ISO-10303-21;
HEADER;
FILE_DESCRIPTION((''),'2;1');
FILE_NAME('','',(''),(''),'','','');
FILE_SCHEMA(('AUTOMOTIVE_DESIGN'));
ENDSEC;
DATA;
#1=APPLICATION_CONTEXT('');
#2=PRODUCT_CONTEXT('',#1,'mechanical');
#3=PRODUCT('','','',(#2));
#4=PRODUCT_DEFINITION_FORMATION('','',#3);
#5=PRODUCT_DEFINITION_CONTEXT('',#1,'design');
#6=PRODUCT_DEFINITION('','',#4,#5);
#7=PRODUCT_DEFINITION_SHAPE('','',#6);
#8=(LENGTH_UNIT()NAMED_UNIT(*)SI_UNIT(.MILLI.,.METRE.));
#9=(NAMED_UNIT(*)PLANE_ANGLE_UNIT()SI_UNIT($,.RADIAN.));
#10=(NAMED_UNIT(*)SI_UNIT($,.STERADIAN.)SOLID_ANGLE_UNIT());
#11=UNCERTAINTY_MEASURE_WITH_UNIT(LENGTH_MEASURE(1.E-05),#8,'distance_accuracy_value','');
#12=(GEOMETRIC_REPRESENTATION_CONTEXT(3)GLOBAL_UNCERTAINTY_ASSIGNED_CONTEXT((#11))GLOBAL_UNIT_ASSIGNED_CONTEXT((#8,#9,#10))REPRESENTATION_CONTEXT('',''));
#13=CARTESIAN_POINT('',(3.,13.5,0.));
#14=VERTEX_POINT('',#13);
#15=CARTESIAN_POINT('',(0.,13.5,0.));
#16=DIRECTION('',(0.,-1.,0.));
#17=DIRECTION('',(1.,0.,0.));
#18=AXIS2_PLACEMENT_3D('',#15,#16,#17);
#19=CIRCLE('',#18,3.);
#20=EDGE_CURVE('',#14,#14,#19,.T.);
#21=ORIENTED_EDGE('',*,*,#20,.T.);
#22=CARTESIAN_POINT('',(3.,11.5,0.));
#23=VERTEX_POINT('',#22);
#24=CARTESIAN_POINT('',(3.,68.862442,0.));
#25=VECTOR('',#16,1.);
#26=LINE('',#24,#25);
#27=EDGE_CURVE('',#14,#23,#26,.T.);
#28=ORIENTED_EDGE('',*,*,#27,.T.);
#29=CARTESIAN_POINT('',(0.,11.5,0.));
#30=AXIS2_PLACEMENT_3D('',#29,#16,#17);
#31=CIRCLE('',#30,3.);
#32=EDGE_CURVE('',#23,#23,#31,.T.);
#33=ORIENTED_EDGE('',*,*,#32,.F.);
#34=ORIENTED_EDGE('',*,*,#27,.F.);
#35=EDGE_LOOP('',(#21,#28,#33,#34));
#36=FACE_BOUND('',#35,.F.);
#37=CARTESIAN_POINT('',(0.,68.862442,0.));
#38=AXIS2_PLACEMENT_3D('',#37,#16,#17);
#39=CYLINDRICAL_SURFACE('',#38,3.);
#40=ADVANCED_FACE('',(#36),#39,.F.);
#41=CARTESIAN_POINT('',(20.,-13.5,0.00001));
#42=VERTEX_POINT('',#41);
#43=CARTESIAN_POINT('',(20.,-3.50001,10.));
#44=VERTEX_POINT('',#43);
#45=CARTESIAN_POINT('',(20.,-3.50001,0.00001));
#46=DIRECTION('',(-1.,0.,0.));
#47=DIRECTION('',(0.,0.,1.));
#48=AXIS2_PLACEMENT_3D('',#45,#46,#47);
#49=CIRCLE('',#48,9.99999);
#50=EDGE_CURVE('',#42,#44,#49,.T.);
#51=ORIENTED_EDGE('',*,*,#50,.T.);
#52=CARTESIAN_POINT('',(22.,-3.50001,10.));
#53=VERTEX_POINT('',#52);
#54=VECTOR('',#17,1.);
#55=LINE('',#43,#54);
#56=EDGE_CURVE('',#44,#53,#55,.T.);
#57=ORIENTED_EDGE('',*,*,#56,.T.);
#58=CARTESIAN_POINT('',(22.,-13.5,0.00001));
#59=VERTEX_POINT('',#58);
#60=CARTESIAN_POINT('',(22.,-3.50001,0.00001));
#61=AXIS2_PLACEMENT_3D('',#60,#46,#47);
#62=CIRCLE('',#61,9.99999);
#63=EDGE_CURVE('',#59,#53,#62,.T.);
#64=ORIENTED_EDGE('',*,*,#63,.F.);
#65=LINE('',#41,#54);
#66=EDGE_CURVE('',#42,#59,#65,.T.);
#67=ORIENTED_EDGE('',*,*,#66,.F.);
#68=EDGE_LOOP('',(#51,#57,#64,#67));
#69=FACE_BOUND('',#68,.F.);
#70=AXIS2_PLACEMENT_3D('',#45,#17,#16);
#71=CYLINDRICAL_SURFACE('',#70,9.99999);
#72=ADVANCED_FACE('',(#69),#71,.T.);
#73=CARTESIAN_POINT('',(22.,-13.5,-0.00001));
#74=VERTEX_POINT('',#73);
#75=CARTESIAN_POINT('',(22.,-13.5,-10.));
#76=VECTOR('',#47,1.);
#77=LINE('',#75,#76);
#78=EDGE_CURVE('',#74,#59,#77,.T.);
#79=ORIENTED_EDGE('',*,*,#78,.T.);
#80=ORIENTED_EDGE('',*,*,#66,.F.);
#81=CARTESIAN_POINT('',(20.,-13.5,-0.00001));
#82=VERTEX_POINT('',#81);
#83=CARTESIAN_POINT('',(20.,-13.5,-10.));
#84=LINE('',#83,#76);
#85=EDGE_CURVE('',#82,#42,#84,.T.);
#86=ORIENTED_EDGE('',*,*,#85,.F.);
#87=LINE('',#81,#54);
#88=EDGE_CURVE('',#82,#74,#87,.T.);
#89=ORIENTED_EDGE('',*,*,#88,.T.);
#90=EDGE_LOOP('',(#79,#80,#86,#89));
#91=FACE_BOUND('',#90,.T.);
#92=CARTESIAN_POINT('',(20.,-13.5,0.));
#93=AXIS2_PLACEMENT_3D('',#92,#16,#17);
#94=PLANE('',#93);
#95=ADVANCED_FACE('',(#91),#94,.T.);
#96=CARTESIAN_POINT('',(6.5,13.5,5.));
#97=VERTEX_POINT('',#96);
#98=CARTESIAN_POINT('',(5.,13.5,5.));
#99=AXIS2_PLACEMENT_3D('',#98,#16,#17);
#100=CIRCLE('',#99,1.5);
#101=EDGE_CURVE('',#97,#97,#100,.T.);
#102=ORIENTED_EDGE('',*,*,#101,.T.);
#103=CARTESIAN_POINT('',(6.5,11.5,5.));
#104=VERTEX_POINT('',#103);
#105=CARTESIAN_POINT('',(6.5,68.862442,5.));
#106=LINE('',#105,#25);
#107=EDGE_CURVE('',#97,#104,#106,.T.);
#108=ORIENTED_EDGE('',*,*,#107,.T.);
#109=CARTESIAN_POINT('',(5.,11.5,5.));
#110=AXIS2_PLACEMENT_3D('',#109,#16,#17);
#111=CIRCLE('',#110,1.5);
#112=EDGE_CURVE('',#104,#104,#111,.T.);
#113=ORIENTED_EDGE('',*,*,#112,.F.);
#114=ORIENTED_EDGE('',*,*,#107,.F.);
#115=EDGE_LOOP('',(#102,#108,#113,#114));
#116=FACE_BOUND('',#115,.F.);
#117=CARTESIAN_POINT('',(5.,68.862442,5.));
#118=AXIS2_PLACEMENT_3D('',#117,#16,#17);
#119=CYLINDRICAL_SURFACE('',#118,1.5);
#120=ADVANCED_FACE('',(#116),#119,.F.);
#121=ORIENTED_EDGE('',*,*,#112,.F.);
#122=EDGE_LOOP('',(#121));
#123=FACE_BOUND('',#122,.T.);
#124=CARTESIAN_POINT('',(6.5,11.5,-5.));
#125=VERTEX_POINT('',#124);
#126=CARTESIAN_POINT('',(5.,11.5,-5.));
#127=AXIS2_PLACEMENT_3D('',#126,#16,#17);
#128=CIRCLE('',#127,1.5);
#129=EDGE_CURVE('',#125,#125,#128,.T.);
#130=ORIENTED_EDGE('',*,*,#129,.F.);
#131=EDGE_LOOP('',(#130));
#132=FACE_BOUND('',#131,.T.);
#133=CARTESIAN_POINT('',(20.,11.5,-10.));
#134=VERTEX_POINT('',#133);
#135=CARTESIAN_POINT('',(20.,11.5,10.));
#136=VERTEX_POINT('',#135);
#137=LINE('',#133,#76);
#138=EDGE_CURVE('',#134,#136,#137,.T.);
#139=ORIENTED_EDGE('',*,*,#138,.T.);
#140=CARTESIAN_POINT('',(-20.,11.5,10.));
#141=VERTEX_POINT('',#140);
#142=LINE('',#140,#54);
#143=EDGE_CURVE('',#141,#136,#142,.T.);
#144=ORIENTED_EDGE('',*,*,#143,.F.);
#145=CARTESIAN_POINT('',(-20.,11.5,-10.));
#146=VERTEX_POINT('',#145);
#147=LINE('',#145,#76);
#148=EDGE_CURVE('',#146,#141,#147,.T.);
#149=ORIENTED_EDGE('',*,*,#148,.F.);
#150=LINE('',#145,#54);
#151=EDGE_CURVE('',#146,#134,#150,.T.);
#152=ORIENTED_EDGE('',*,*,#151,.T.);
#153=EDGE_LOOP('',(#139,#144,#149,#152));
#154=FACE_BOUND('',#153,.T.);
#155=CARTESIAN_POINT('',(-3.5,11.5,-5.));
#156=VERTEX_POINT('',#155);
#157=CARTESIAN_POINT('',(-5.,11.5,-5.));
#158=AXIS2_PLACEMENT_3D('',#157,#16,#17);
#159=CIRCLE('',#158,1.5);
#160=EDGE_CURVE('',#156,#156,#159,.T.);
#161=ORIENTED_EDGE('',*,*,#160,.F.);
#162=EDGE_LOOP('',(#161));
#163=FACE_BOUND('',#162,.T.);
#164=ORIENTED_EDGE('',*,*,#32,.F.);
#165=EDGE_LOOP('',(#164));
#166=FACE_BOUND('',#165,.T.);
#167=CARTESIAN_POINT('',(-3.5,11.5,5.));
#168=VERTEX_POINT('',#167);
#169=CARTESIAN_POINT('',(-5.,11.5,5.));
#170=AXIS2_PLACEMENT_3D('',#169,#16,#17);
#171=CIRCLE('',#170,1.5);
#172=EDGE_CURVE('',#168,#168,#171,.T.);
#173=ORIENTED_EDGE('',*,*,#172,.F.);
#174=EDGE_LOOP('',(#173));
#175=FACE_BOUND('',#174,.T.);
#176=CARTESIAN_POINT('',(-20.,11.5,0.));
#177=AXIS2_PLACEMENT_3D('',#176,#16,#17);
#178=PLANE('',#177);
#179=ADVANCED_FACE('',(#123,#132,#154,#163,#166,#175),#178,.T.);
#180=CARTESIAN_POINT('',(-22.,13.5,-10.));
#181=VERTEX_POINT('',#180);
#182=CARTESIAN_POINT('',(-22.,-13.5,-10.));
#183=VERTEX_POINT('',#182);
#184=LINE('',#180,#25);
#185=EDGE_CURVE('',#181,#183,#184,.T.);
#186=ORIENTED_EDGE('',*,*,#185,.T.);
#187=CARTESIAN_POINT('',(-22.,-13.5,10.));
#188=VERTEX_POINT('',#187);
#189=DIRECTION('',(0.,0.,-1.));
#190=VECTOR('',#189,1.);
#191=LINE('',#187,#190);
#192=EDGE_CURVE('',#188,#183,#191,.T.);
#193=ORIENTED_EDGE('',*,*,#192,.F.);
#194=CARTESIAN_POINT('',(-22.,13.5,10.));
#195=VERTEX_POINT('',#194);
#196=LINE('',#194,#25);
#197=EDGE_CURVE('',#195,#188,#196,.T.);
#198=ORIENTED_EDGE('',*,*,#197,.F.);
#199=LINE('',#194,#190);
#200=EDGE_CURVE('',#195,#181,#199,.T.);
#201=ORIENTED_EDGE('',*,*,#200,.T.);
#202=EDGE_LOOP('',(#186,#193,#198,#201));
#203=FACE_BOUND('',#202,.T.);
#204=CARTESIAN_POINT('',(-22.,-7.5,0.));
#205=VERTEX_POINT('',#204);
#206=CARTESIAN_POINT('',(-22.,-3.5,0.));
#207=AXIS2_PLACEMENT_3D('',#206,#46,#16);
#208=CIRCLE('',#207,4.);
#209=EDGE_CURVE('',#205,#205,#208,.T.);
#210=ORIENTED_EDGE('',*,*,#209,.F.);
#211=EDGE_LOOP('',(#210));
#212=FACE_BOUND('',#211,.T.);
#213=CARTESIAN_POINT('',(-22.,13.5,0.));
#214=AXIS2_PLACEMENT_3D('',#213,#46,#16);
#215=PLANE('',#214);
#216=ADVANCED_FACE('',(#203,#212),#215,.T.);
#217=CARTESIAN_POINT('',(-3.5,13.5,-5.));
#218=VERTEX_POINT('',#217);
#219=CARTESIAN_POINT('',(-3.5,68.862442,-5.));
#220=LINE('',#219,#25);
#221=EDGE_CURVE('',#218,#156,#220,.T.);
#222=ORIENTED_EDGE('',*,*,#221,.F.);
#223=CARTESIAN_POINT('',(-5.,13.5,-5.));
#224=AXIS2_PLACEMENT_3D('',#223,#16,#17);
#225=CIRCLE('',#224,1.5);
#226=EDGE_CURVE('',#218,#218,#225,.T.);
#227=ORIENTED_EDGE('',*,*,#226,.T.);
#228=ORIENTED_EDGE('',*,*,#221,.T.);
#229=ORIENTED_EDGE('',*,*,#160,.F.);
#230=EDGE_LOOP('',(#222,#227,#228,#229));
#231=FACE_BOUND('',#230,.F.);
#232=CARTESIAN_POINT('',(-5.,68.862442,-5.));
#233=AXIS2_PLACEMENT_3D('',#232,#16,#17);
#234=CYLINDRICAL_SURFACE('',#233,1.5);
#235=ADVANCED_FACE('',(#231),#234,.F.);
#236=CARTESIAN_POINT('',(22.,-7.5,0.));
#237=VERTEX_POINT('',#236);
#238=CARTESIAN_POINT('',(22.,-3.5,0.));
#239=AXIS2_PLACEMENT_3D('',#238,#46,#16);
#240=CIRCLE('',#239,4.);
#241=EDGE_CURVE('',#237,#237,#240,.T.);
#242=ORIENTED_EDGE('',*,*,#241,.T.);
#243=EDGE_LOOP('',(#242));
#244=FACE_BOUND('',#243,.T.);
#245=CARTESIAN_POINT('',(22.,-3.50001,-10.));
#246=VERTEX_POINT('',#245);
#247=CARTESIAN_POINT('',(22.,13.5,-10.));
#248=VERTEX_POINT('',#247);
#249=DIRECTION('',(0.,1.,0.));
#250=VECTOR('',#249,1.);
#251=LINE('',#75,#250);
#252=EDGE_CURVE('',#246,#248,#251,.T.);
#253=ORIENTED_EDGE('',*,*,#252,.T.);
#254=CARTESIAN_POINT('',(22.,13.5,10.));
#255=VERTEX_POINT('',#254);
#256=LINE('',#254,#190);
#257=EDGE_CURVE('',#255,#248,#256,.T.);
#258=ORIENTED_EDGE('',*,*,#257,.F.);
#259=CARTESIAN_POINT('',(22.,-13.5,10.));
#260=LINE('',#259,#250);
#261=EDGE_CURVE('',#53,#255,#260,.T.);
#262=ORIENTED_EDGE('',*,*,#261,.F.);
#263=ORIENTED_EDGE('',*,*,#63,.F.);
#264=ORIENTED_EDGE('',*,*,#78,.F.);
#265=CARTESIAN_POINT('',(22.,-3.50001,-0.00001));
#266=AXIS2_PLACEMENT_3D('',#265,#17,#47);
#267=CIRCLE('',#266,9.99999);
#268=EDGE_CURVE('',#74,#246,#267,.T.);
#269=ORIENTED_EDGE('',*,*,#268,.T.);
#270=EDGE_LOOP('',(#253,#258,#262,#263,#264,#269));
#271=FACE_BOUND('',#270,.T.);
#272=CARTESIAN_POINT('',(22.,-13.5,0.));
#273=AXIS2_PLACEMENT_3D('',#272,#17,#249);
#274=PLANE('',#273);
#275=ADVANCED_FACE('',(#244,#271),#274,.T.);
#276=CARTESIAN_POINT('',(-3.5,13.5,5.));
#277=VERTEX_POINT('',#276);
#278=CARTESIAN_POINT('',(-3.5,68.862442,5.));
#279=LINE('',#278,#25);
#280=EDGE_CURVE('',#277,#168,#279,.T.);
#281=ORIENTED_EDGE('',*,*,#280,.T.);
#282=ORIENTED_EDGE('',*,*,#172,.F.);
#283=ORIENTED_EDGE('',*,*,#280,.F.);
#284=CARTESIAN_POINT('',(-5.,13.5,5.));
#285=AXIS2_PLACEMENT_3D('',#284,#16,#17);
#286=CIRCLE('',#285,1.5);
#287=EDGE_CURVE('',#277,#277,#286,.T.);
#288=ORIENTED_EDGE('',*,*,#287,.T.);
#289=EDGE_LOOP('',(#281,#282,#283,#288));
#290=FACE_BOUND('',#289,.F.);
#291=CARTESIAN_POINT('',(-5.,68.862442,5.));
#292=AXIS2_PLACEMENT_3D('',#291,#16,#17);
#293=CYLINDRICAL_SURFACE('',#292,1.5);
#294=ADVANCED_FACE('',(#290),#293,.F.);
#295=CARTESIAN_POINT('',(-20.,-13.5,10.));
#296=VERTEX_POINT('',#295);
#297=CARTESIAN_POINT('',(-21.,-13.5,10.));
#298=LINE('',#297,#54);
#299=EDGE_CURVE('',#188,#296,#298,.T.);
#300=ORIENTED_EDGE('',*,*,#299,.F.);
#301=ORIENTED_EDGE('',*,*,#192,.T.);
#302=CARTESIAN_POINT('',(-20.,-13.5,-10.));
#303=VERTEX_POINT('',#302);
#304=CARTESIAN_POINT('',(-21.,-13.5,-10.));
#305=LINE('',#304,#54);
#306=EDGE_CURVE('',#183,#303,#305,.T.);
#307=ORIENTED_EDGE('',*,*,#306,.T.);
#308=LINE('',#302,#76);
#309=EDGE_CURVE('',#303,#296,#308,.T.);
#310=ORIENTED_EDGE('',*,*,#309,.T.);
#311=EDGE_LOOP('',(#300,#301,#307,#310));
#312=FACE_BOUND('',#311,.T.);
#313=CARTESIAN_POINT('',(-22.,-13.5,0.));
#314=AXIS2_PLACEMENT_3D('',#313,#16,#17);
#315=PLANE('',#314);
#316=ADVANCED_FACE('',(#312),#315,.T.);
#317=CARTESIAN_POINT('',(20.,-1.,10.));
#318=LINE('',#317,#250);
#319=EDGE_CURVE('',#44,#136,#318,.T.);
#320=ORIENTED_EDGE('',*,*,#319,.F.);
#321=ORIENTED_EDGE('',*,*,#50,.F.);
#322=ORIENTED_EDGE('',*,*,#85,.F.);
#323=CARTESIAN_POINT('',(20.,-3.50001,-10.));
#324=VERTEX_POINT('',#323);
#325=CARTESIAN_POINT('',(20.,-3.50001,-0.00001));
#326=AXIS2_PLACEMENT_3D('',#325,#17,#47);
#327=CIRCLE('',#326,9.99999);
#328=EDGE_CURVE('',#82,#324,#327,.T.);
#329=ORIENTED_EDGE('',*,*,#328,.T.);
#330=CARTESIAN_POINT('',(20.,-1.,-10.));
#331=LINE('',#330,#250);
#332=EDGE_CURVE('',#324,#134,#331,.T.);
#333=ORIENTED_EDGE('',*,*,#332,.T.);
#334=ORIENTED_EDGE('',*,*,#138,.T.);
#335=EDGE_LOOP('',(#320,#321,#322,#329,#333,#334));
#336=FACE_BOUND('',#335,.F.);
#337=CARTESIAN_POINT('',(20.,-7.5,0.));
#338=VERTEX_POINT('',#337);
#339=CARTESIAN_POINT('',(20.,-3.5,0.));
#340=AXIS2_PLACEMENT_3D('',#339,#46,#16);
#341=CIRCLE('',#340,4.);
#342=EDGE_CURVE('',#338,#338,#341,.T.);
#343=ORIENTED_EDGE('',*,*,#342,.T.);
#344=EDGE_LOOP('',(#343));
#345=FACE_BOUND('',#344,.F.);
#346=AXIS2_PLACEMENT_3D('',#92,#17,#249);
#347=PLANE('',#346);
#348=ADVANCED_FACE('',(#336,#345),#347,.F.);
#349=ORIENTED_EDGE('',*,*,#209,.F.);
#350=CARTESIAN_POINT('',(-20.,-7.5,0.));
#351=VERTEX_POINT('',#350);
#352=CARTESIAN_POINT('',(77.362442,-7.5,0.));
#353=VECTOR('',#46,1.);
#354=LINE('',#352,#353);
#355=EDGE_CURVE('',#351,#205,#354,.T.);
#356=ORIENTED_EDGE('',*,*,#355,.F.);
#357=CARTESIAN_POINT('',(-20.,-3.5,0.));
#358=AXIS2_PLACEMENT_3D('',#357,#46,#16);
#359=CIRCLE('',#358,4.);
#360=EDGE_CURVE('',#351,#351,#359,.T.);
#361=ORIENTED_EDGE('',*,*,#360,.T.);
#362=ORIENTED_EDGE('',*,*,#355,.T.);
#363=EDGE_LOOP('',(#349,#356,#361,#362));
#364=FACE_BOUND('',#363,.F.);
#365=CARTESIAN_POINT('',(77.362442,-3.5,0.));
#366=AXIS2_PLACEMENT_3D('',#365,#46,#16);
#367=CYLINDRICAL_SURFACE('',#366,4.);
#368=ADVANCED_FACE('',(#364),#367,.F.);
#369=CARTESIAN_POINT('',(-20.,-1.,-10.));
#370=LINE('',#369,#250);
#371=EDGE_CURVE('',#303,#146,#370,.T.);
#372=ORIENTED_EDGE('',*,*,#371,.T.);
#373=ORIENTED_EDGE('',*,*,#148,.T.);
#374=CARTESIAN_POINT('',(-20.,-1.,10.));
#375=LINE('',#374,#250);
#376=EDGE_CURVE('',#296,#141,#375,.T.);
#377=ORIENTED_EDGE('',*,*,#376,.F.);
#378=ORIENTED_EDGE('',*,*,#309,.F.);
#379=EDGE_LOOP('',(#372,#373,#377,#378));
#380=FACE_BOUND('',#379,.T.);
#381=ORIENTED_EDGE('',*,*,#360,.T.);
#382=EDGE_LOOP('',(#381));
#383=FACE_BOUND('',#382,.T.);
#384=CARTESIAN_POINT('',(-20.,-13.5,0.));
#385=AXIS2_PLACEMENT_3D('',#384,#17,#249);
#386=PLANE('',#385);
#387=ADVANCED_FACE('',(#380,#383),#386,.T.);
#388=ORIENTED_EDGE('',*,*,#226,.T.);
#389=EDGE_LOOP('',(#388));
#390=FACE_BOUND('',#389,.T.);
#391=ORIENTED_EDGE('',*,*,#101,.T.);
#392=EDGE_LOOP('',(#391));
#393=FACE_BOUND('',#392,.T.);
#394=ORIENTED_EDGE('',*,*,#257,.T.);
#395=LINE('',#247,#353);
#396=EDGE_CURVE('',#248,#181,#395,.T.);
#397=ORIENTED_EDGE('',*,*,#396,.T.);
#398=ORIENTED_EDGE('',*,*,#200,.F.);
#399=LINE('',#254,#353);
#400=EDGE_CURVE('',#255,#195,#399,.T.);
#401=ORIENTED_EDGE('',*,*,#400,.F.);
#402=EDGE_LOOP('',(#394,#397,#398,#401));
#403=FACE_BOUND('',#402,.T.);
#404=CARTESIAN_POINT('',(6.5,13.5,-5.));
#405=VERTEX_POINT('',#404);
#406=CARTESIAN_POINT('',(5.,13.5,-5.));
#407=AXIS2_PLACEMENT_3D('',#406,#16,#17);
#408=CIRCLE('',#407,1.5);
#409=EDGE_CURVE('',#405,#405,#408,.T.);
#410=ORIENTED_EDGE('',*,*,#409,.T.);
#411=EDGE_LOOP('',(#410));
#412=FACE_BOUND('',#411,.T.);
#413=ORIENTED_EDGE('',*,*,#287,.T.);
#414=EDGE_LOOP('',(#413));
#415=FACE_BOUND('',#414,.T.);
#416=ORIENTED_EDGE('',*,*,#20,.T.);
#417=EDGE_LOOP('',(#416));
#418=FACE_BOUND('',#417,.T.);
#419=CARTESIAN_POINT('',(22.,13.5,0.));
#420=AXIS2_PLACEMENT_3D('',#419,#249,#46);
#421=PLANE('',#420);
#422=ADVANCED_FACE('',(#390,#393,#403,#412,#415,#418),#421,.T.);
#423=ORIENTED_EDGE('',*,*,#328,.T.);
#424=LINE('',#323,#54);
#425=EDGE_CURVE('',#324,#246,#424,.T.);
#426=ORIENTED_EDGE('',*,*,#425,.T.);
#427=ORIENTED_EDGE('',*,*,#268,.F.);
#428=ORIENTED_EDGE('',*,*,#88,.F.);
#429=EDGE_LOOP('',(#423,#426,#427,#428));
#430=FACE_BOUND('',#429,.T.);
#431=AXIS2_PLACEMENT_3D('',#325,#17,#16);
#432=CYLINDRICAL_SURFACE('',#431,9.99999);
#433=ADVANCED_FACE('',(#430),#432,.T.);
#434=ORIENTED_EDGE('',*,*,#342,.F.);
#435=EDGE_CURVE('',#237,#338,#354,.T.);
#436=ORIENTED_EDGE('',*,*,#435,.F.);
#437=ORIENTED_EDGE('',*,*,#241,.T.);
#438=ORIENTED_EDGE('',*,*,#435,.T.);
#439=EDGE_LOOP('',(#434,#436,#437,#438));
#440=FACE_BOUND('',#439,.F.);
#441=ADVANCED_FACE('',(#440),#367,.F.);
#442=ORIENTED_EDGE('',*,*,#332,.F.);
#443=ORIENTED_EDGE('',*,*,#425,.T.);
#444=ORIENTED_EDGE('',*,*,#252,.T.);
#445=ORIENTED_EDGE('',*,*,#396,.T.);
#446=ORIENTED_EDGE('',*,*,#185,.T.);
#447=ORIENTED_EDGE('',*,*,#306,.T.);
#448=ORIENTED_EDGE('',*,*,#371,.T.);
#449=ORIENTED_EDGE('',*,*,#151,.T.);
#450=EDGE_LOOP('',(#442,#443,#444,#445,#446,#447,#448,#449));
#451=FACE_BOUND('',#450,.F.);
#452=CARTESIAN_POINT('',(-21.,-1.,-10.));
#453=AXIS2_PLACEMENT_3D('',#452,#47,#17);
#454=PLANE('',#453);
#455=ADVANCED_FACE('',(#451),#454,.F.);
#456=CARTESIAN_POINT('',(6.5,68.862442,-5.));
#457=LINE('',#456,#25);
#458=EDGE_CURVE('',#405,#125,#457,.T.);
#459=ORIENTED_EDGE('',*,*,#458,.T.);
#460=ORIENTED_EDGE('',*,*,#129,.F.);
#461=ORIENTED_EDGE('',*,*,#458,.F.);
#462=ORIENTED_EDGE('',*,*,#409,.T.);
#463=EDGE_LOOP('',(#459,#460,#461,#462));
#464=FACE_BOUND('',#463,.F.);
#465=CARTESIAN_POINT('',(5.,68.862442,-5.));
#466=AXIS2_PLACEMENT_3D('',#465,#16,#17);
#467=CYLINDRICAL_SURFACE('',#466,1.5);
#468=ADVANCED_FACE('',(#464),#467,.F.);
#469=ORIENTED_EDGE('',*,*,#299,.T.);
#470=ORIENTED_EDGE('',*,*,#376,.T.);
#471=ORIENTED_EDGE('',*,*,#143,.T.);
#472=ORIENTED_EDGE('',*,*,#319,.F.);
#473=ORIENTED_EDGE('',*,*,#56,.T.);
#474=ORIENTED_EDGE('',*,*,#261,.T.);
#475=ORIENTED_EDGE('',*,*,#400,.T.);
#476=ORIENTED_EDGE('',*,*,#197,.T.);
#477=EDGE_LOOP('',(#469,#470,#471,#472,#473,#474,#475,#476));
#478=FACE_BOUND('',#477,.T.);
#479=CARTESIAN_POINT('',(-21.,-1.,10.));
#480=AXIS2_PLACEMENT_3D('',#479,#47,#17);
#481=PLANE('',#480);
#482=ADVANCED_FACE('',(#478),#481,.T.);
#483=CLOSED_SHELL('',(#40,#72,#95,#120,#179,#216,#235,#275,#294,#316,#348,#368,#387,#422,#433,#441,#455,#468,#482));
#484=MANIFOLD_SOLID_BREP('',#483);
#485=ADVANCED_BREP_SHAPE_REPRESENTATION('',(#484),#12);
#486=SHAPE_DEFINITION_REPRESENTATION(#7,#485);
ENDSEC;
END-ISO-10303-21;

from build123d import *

# Parameters (mm, degrees)
F0_W     = 2
F0_H     = 25
F1_DEPTH = 10
F2_R     = 9.99999
F4_D     = 6
F6_D     = 3
F8_D     = 8


# Not quite as in the source:
# - a fillet or chamfer is up to 0.001 mm smaller than in the source, because OpenCascade refuses the exact size


with BuildPart() as f1:
    # F0 (on Top) → F1 (new body, symmetric)
    with BuildSketch(Plane.XY):
        with Locations((-21, -1)):
            Rectangle(F0_W, F0_H)
        Polygon((-22, 13.5), (-22, 11.5), (-20, 11.5), (20, 11.5), (22, 11.5), (22, 13.5), align=None)
        with Locations((21, -1)):
            Rectangle(F0_W, F0_H)
    extrude(amount=F1_DEPTH, both=True)

    # F2 (radius 10 in the source; OpenCascade refuses exactly that, so slightly less here)
    f2_edges = [f1.edges().sort_by_distance(p)[0] for p in [
        (21, -13.5, 10),
        (21, -13.5, -10),
    ]]
    fillet(f2_edges, radius=F2_R)

    # F4 (through all)
    with Locations(Plane(origin=(0, 13.5, 0), x_dir=(-1, 0, 0), z_dir=(0, 1, 0))):
        with Locations((0, 0)):
            Hole(F4_D / 2)

    # F6 (through all)
    with Locations(Plane(origin=(0, 13.5, 0), x_dir=(-1, 0, 0), z_dir=(0, 1, 0))):
        with Locations((-5, 5), (5, 5), (5, -5), (-5, -5)):
            Hole(F6_D / 2)

    # F8 (through all)
    with Locations(Plane.YZ.offset(22)):
        with Locations((-3.5, 0)):
            Hole(F8_D / 2)


solid = f1.part
